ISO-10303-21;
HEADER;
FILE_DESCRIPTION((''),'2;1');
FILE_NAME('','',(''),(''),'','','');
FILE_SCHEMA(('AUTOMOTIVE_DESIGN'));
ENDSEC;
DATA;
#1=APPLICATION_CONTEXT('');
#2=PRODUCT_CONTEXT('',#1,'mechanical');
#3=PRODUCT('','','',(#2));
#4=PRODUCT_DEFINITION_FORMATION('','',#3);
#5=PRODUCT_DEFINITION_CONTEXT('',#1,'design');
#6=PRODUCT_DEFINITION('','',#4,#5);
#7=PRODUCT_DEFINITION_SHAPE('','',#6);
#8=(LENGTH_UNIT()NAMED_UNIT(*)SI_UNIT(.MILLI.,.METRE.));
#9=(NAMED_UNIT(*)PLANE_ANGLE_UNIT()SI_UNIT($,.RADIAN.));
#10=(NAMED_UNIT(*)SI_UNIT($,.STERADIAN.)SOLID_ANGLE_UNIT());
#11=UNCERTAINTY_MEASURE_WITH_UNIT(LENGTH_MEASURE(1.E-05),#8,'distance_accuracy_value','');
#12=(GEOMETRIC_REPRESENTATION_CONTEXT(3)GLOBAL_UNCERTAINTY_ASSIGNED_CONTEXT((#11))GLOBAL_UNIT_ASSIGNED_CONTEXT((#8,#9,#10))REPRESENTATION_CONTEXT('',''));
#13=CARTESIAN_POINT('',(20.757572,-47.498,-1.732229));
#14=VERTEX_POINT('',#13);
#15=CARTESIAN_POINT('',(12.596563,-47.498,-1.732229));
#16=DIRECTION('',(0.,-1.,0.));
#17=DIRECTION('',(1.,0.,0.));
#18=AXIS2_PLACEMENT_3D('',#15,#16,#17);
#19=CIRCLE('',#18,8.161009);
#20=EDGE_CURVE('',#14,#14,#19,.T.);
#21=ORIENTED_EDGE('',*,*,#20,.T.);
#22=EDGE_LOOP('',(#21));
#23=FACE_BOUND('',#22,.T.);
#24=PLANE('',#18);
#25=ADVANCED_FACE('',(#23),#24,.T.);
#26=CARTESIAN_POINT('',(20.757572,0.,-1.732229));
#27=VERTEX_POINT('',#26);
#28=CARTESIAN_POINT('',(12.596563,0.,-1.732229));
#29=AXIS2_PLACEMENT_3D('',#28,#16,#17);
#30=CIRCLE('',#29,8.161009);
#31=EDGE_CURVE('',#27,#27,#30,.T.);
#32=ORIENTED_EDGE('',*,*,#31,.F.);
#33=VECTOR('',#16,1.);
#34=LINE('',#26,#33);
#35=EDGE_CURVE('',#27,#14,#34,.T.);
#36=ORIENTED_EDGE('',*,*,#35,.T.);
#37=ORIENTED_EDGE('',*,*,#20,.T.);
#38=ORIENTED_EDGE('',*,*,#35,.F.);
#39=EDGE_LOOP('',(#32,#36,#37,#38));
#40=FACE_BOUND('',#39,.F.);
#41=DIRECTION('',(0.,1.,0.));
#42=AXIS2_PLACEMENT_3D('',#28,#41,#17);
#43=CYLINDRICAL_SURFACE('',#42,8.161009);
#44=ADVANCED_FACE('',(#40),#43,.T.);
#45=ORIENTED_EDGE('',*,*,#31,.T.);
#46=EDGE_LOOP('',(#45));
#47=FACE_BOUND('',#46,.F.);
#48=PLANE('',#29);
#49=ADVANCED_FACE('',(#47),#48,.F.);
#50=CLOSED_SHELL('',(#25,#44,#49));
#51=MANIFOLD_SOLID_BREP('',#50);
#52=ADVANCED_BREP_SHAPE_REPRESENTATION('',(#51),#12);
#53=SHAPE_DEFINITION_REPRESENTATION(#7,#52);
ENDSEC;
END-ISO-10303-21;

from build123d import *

# Parameters (mm, degrees)
F2_R     = 8.1610092079
F2_R_2   = 4.726237379
F3_DEPTH = 47.498


# Not quite as in the source:
# - the program builds the solid bodies; features that only make, move or delete a surface that nothing else refers to are left out


with BuildPart() as f3:
    # F2 (on Front) → F3 (new body)
    with BuildSketch(Plane.XZ):
        with Locations((12.5965625048, -1.7322285566)):
            Circle(F2_R)
        with Locations((12.5965625048, -1.7322285566)):
            Circle(F2_R_2, mode=Mode.SUBTRACT)
        with Locations((12.5965625048, -1.7322285566)):
            Circle(F2_R_2)
    extrude(amount=F3_DEPTH)


solid = f3.part
